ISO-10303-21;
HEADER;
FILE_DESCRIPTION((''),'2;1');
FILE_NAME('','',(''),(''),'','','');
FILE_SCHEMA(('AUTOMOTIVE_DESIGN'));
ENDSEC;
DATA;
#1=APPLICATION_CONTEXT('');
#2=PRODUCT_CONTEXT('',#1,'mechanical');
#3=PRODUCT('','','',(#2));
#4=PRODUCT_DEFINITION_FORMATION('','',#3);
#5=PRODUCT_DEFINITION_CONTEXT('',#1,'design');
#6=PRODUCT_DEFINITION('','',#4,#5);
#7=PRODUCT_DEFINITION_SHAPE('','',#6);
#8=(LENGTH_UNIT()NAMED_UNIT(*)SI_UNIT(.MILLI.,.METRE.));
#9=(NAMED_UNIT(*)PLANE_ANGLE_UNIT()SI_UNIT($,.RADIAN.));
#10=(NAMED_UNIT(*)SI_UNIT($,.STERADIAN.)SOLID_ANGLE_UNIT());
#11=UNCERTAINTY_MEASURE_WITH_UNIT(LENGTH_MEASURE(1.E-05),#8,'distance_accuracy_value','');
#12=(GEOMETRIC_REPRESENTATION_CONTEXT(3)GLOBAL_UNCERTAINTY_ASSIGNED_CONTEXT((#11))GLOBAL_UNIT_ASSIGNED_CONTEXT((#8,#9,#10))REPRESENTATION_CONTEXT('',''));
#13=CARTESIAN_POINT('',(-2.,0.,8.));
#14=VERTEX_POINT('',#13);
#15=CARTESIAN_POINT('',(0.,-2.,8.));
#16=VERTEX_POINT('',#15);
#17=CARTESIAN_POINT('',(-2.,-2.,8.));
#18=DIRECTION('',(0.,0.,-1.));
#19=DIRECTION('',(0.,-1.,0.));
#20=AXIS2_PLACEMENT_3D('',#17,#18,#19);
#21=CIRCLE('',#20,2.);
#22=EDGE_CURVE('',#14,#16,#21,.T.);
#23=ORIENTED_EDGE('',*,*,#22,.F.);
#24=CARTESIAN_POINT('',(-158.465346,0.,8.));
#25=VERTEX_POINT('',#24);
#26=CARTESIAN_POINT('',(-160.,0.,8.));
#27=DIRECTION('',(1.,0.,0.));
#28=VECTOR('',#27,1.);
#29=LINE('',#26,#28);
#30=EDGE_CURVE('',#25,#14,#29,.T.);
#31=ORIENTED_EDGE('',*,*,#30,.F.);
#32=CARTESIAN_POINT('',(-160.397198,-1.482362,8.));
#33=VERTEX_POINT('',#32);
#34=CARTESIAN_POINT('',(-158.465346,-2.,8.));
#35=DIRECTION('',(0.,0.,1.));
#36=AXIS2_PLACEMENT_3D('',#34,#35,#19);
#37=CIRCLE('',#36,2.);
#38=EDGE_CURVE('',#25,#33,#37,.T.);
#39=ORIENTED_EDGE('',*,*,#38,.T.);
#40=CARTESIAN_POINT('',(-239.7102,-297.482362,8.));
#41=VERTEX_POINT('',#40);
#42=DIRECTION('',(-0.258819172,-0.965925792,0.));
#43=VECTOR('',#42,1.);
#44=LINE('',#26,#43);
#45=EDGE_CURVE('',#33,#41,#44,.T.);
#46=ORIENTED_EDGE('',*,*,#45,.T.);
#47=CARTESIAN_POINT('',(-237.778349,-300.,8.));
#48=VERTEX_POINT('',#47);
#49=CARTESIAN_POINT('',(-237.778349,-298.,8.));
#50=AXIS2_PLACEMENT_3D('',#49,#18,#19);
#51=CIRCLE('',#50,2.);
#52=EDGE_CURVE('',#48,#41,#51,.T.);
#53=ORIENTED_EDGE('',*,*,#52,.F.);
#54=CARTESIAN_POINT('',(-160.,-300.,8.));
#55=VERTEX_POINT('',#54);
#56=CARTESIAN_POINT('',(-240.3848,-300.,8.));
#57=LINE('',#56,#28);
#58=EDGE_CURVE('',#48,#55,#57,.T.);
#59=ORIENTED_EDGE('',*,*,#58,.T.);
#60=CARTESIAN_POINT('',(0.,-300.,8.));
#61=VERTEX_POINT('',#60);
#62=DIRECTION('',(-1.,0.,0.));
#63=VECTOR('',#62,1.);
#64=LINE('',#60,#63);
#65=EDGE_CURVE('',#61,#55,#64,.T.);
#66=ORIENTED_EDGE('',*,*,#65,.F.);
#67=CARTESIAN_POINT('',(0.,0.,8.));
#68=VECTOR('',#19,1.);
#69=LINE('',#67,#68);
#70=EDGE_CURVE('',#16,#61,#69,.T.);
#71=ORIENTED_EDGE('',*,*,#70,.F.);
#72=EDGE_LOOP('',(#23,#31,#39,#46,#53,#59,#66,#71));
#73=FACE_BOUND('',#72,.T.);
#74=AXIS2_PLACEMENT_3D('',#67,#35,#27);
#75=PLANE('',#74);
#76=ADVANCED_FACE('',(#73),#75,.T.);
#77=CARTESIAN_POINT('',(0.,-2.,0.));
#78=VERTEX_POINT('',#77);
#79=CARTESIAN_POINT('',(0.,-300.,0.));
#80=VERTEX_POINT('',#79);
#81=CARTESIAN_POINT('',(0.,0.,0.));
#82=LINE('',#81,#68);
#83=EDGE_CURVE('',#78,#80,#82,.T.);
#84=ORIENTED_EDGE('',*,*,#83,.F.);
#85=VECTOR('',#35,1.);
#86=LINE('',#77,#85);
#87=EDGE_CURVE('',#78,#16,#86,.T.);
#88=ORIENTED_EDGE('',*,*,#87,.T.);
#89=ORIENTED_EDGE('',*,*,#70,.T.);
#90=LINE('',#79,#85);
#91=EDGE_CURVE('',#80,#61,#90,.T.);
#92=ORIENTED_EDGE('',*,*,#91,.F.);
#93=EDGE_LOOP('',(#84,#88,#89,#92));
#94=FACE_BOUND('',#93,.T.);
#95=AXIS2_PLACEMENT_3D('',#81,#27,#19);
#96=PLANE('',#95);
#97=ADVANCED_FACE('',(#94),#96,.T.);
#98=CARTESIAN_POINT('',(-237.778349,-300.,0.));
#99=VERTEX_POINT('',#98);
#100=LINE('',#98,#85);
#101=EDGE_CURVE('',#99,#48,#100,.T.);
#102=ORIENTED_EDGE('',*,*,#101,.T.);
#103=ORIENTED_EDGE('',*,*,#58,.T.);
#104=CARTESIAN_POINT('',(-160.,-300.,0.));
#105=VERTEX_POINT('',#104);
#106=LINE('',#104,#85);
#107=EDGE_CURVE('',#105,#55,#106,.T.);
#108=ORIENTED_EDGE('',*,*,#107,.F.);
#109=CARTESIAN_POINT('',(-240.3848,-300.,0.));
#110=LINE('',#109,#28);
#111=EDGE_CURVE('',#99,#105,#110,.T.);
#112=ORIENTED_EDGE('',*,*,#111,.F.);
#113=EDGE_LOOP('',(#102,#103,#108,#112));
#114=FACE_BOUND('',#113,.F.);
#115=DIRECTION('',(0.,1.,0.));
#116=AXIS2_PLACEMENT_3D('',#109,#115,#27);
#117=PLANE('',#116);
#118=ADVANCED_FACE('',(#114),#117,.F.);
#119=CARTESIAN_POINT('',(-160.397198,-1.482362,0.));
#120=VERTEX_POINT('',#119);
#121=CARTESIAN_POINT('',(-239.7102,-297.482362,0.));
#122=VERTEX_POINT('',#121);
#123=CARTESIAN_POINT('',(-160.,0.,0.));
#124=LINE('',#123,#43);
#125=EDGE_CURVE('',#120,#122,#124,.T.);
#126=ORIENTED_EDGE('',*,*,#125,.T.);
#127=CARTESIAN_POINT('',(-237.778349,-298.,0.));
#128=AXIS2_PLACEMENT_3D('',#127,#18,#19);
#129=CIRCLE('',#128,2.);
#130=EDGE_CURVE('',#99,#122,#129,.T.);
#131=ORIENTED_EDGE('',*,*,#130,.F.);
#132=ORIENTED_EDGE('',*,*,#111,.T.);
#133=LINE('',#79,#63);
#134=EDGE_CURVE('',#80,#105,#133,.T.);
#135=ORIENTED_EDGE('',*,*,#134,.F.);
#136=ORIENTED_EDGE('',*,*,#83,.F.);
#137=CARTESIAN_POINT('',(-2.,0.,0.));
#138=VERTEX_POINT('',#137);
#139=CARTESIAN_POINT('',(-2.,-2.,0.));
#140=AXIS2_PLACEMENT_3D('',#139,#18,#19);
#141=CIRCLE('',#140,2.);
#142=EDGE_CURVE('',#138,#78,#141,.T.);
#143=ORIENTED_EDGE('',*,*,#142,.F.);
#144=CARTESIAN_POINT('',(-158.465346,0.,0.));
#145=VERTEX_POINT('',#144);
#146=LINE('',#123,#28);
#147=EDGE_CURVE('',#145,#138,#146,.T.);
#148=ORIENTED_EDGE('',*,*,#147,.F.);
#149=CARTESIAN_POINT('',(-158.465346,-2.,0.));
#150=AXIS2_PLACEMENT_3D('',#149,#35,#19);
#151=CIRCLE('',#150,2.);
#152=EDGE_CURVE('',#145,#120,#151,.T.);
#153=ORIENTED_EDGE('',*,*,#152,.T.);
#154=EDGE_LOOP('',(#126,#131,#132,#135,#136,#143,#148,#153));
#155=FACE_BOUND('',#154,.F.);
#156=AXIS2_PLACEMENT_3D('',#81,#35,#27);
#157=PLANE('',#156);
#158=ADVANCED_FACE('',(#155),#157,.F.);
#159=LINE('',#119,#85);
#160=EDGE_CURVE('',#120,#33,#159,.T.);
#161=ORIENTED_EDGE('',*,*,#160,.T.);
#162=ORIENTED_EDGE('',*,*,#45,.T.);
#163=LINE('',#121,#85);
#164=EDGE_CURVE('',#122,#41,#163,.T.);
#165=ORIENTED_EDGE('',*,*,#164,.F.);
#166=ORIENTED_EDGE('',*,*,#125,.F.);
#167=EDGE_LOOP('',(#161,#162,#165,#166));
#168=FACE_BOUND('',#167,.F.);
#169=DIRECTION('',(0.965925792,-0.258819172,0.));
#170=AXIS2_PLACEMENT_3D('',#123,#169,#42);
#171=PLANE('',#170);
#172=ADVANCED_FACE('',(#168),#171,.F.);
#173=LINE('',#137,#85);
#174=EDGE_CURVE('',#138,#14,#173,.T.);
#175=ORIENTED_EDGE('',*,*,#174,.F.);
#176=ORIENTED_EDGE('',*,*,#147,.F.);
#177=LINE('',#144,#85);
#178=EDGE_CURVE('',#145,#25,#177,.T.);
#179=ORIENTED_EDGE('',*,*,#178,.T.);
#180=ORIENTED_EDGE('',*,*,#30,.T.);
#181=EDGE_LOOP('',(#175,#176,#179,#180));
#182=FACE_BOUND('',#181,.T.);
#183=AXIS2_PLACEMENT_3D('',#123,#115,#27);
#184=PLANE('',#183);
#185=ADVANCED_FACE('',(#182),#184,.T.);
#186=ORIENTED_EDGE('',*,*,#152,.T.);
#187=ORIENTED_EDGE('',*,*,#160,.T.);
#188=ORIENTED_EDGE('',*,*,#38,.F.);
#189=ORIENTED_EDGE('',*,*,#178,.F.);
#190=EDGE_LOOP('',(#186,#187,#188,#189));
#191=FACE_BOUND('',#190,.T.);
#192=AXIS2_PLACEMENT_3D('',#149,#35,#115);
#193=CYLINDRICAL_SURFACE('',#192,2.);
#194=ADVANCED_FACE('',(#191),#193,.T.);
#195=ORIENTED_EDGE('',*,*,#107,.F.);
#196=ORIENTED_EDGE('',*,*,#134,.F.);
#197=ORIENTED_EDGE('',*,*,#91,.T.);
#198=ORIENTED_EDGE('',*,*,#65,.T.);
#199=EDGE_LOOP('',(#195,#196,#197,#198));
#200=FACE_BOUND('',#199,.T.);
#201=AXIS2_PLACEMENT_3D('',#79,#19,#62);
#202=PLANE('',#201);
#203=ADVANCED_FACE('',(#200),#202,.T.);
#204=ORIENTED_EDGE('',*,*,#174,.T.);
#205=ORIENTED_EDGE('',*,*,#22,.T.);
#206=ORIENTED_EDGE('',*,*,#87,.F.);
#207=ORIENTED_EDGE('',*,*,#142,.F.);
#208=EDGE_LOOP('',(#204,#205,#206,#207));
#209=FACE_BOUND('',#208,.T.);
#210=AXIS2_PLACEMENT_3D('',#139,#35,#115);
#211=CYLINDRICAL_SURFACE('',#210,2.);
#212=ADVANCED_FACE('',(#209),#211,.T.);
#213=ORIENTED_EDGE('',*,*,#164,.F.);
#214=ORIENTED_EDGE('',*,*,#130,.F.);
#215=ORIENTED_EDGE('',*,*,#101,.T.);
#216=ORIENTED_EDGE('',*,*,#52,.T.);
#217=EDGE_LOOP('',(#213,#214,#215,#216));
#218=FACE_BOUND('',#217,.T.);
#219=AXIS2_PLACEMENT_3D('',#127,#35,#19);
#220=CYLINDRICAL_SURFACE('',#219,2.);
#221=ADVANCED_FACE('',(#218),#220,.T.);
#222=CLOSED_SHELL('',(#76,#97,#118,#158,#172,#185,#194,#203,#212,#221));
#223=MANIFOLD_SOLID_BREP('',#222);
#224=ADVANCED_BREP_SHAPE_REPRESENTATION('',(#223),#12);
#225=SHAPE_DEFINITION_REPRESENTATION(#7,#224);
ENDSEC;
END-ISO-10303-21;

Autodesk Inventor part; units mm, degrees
ref_plane "YZ Plane" through (0, 0, 0) normal (1, 0, 0) x (0, 1, 0)
ref_plane "XZ Plane" through (0, 0, 0) normal (0, 1, 0) x (-1, 0, 0)
ref_plane "XY Plane" through (0, 0, 0) normal (0, 0, 1) x (1, 0, 0)
sketch "Sketch1" plane through (0, 0, 0) normal (0, 0, 1) x (1, 0, 0)
  line L0 (-160, 0) -> (0, 0)
  line L1 (-160, -300) -> (-160, 0) construction
  line L2 (-160, 0) -> (-240.3848, -300)
  line L3 (-240.3848, -300) -> (-160, -300)
  line L4 (0, 0) -> (-80.3848, -300) construction
  line L5 (0, 0) -> (160, 0)
  line L6 (0, 0) -> (0, -300)
  line L7 (0, -300) -> (-160, -300)
  dimension "d2" = 15
  dimension "d29" = 160
  dimension "d40" = 300
  dimension "d41" = 15
extrude "Plate1" add sketch "Sketch1" along normal blind 8
fillet "Corner Round1" radius 2 3 edges at (-240.3848, -300, 4) (0, 0, 4) (-160, 0, 4)
equation "\"d3\" = Thickness"
equation "\"BendRadius\" = Thickness"
equation "\"BendReliefWidth\" = Thickness"
equation "\"BendReliefDepth\" = 0.5 * Thickness"
equation "\"CornerReliefSize\" = 4 * Thickness"
equation "\"MinimumRemnant\" = 2 * Thickness"
equation "\"TransitionRadius\" = BendRadius"
equation "\"JacobiRadiusSize\" = BendRadius"
equation "\"GapSize\" = Thickness"
equation "\"Thickness\" = 8"
properties part number "Сrane plate 4"
